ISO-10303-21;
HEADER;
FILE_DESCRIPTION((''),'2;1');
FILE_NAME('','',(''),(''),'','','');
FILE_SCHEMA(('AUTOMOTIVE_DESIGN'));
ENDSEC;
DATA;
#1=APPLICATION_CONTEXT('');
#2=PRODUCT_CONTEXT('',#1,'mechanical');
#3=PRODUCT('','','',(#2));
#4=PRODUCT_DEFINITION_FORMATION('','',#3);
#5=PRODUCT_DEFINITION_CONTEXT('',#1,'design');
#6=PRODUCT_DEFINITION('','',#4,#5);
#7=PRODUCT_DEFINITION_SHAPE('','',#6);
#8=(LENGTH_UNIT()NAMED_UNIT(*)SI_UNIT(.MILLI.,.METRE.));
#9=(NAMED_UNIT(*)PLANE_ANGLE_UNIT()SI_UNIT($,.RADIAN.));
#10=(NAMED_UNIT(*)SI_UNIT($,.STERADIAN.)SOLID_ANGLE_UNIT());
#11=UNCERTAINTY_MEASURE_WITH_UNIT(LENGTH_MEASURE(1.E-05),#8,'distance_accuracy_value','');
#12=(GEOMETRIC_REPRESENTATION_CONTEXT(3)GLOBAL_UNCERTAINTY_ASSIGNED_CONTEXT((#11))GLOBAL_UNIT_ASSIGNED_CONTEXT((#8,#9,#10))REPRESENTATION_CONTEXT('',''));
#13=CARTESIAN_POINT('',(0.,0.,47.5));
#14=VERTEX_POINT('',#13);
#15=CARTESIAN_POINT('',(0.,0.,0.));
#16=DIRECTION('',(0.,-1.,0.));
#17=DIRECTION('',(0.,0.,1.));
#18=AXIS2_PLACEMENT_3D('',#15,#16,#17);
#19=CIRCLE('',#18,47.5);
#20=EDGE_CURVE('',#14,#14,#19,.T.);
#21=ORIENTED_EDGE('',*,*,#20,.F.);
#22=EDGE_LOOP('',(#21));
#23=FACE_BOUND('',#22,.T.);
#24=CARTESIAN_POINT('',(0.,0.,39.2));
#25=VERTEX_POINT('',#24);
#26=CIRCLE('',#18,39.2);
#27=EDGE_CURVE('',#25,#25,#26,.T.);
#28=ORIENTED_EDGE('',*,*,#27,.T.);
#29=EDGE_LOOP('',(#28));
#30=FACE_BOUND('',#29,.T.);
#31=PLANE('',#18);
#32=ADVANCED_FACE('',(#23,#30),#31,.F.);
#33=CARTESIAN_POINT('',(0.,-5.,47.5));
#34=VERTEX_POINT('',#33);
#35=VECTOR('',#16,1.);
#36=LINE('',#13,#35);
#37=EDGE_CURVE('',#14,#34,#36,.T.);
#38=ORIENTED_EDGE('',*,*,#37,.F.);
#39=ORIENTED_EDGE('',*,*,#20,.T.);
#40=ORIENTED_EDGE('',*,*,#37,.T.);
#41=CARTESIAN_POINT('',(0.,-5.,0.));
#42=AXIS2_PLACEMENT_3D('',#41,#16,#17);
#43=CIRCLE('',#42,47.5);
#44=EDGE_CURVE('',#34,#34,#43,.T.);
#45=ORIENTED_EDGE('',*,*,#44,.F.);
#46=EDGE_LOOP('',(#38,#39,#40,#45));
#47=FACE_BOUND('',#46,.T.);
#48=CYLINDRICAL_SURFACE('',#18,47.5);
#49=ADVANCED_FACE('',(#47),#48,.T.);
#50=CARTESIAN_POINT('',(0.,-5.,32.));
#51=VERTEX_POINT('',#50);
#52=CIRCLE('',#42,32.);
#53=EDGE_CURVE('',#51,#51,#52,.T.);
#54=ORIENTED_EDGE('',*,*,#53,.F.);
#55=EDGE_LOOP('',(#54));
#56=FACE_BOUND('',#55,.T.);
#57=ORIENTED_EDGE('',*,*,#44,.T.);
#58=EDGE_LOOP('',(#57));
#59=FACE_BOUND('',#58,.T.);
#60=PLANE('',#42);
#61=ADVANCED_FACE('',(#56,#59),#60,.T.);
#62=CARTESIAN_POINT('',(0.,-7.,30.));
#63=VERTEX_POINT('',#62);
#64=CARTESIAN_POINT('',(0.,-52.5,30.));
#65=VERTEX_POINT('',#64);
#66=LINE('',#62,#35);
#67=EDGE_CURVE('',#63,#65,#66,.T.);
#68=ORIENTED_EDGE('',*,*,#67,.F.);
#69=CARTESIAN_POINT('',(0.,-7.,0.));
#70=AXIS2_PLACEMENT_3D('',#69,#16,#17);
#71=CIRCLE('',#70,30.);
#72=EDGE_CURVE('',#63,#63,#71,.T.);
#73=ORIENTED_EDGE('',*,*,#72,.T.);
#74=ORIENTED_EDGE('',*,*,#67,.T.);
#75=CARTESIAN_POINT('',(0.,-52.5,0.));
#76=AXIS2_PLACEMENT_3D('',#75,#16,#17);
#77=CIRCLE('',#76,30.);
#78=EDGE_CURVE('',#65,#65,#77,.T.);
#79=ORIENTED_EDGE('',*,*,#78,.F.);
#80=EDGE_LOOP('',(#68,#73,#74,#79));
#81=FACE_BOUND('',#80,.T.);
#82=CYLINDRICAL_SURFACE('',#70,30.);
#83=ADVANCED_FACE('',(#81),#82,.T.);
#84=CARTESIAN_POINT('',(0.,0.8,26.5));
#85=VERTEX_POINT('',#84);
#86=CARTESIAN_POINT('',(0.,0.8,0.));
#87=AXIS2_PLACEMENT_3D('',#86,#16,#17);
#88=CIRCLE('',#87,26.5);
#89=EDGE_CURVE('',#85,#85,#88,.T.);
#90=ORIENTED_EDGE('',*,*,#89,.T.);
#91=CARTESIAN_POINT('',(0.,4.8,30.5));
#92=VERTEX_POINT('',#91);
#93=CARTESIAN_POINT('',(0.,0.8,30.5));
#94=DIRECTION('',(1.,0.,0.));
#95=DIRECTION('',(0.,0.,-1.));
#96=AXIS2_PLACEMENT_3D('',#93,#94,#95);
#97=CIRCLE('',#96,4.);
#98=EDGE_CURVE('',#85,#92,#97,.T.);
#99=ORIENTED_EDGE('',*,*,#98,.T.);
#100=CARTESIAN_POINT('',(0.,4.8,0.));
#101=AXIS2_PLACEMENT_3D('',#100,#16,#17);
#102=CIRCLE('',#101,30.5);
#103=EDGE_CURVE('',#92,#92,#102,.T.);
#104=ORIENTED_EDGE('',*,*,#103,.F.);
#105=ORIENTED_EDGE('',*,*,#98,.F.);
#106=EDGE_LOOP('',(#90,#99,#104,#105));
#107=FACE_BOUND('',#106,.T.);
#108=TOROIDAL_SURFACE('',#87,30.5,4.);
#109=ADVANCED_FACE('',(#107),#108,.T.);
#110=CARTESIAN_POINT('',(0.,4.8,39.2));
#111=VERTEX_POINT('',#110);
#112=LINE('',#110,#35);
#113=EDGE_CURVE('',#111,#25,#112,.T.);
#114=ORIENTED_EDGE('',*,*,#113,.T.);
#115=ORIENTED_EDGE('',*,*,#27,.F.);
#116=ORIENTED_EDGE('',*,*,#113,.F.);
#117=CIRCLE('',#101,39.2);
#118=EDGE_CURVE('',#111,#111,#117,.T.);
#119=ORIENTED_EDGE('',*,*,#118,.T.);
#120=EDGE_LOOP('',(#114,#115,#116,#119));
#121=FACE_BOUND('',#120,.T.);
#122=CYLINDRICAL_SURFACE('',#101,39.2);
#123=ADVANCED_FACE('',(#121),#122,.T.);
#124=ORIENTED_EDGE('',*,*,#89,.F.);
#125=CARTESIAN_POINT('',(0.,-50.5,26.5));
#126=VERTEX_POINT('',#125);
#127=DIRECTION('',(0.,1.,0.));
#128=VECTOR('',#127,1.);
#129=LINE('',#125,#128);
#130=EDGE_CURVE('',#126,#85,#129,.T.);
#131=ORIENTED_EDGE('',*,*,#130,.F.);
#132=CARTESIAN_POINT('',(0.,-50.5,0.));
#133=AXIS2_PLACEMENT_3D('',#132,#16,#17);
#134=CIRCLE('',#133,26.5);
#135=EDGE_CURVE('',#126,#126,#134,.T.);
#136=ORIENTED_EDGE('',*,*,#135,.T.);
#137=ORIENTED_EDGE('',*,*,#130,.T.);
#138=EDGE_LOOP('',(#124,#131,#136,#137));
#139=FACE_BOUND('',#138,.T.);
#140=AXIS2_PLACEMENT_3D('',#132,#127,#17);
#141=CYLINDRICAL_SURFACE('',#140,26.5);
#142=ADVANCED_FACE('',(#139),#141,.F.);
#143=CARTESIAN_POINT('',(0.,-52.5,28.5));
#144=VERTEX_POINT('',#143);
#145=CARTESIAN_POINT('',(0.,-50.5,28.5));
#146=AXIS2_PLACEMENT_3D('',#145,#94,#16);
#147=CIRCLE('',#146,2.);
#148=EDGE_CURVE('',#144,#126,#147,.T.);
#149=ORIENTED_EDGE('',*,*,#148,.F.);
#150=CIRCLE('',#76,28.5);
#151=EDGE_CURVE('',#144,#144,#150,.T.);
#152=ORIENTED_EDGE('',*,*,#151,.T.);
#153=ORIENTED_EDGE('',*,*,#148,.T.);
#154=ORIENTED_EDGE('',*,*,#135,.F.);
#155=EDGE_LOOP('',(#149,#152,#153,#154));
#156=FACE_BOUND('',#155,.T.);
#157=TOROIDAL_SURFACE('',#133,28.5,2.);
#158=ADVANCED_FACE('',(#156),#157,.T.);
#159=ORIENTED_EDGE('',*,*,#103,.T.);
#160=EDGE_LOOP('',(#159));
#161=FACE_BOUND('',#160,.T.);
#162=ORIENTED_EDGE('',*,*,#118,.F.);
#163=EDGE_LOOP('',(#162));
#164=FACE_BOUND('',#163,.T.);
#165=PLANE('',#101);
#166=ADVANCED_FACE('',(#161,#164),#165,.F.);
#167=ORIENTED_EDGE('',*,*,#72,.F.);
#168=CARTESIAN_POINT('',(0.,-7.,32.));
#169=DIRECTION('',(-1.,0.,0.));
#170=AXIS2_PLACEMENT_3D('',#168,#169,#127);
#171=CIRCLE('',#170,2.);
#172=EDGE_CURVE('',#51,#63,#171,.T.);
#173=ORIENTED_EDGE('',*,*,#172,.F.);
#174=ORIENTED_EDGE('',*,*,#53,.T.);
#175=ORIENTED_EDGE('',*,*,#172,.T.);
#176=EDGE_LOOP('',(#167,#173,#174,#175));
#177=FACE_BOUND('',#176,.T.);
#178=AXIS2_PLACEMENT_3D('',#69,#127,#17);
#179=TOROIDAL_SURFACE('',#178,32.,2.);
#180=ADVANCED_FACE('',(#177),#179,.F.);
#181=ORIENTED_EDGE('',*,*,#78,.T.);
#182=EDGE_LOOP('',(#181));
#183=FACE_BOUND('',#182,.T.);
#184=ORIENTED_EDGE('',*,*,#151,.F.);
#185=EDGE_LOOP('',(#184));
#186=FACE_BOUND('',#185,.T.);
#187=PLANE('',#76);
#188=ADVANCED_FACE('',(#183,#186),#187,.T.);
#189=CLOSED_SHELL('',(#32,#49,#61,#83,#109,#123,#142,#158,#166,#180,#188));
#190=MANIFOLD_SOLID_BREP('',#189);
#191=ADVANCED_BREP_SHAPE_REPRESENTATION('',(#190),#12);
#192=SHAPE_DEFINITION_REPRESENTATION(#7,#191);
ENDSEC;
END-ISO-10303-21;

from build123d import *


# Not quite as in the source:
# - a feature of the source that left no trace in its solid (it failed there, or was rolled back) is left out


with BuildPart() as f1:
    # F0 (on Right) → F1 (revolve)
    with BuildSketch(Plane.YZ):
        with BuildLine():
            Line((4.8, 39.2), (0, 39.2))
            Line((0, 39.2), (0, 47.5))
            Line((0, 47.5), (-5, 47.5))
            Line((-5, 47.5), (-5, 32))
            ThreePointArc((-5, 32), (-5.5857864376, 30.5857864376), (-7, 30))
            Line((-7, 30), (-52.5, 30))
            Line((-52.5, 30), (-52.5, 28.5))
            ThreePointArc((-52.5, 28.5), (-51.9142135624, 27.0857864376), (-50.5, 26.5))
            Line((-50.5, 26.5), (0.8, 26.5))
            ThreePointArc((0.8, 26.5), (3.6284271247, 27.6715728753), (4.8, 30.5))
            Line((4.8, 30.5), (4.8, 39.2))
        make_face()
    revolve(axis=Axis((0, -35.2283529937, 0), (0, -1, 0)))


solid = f1.part
